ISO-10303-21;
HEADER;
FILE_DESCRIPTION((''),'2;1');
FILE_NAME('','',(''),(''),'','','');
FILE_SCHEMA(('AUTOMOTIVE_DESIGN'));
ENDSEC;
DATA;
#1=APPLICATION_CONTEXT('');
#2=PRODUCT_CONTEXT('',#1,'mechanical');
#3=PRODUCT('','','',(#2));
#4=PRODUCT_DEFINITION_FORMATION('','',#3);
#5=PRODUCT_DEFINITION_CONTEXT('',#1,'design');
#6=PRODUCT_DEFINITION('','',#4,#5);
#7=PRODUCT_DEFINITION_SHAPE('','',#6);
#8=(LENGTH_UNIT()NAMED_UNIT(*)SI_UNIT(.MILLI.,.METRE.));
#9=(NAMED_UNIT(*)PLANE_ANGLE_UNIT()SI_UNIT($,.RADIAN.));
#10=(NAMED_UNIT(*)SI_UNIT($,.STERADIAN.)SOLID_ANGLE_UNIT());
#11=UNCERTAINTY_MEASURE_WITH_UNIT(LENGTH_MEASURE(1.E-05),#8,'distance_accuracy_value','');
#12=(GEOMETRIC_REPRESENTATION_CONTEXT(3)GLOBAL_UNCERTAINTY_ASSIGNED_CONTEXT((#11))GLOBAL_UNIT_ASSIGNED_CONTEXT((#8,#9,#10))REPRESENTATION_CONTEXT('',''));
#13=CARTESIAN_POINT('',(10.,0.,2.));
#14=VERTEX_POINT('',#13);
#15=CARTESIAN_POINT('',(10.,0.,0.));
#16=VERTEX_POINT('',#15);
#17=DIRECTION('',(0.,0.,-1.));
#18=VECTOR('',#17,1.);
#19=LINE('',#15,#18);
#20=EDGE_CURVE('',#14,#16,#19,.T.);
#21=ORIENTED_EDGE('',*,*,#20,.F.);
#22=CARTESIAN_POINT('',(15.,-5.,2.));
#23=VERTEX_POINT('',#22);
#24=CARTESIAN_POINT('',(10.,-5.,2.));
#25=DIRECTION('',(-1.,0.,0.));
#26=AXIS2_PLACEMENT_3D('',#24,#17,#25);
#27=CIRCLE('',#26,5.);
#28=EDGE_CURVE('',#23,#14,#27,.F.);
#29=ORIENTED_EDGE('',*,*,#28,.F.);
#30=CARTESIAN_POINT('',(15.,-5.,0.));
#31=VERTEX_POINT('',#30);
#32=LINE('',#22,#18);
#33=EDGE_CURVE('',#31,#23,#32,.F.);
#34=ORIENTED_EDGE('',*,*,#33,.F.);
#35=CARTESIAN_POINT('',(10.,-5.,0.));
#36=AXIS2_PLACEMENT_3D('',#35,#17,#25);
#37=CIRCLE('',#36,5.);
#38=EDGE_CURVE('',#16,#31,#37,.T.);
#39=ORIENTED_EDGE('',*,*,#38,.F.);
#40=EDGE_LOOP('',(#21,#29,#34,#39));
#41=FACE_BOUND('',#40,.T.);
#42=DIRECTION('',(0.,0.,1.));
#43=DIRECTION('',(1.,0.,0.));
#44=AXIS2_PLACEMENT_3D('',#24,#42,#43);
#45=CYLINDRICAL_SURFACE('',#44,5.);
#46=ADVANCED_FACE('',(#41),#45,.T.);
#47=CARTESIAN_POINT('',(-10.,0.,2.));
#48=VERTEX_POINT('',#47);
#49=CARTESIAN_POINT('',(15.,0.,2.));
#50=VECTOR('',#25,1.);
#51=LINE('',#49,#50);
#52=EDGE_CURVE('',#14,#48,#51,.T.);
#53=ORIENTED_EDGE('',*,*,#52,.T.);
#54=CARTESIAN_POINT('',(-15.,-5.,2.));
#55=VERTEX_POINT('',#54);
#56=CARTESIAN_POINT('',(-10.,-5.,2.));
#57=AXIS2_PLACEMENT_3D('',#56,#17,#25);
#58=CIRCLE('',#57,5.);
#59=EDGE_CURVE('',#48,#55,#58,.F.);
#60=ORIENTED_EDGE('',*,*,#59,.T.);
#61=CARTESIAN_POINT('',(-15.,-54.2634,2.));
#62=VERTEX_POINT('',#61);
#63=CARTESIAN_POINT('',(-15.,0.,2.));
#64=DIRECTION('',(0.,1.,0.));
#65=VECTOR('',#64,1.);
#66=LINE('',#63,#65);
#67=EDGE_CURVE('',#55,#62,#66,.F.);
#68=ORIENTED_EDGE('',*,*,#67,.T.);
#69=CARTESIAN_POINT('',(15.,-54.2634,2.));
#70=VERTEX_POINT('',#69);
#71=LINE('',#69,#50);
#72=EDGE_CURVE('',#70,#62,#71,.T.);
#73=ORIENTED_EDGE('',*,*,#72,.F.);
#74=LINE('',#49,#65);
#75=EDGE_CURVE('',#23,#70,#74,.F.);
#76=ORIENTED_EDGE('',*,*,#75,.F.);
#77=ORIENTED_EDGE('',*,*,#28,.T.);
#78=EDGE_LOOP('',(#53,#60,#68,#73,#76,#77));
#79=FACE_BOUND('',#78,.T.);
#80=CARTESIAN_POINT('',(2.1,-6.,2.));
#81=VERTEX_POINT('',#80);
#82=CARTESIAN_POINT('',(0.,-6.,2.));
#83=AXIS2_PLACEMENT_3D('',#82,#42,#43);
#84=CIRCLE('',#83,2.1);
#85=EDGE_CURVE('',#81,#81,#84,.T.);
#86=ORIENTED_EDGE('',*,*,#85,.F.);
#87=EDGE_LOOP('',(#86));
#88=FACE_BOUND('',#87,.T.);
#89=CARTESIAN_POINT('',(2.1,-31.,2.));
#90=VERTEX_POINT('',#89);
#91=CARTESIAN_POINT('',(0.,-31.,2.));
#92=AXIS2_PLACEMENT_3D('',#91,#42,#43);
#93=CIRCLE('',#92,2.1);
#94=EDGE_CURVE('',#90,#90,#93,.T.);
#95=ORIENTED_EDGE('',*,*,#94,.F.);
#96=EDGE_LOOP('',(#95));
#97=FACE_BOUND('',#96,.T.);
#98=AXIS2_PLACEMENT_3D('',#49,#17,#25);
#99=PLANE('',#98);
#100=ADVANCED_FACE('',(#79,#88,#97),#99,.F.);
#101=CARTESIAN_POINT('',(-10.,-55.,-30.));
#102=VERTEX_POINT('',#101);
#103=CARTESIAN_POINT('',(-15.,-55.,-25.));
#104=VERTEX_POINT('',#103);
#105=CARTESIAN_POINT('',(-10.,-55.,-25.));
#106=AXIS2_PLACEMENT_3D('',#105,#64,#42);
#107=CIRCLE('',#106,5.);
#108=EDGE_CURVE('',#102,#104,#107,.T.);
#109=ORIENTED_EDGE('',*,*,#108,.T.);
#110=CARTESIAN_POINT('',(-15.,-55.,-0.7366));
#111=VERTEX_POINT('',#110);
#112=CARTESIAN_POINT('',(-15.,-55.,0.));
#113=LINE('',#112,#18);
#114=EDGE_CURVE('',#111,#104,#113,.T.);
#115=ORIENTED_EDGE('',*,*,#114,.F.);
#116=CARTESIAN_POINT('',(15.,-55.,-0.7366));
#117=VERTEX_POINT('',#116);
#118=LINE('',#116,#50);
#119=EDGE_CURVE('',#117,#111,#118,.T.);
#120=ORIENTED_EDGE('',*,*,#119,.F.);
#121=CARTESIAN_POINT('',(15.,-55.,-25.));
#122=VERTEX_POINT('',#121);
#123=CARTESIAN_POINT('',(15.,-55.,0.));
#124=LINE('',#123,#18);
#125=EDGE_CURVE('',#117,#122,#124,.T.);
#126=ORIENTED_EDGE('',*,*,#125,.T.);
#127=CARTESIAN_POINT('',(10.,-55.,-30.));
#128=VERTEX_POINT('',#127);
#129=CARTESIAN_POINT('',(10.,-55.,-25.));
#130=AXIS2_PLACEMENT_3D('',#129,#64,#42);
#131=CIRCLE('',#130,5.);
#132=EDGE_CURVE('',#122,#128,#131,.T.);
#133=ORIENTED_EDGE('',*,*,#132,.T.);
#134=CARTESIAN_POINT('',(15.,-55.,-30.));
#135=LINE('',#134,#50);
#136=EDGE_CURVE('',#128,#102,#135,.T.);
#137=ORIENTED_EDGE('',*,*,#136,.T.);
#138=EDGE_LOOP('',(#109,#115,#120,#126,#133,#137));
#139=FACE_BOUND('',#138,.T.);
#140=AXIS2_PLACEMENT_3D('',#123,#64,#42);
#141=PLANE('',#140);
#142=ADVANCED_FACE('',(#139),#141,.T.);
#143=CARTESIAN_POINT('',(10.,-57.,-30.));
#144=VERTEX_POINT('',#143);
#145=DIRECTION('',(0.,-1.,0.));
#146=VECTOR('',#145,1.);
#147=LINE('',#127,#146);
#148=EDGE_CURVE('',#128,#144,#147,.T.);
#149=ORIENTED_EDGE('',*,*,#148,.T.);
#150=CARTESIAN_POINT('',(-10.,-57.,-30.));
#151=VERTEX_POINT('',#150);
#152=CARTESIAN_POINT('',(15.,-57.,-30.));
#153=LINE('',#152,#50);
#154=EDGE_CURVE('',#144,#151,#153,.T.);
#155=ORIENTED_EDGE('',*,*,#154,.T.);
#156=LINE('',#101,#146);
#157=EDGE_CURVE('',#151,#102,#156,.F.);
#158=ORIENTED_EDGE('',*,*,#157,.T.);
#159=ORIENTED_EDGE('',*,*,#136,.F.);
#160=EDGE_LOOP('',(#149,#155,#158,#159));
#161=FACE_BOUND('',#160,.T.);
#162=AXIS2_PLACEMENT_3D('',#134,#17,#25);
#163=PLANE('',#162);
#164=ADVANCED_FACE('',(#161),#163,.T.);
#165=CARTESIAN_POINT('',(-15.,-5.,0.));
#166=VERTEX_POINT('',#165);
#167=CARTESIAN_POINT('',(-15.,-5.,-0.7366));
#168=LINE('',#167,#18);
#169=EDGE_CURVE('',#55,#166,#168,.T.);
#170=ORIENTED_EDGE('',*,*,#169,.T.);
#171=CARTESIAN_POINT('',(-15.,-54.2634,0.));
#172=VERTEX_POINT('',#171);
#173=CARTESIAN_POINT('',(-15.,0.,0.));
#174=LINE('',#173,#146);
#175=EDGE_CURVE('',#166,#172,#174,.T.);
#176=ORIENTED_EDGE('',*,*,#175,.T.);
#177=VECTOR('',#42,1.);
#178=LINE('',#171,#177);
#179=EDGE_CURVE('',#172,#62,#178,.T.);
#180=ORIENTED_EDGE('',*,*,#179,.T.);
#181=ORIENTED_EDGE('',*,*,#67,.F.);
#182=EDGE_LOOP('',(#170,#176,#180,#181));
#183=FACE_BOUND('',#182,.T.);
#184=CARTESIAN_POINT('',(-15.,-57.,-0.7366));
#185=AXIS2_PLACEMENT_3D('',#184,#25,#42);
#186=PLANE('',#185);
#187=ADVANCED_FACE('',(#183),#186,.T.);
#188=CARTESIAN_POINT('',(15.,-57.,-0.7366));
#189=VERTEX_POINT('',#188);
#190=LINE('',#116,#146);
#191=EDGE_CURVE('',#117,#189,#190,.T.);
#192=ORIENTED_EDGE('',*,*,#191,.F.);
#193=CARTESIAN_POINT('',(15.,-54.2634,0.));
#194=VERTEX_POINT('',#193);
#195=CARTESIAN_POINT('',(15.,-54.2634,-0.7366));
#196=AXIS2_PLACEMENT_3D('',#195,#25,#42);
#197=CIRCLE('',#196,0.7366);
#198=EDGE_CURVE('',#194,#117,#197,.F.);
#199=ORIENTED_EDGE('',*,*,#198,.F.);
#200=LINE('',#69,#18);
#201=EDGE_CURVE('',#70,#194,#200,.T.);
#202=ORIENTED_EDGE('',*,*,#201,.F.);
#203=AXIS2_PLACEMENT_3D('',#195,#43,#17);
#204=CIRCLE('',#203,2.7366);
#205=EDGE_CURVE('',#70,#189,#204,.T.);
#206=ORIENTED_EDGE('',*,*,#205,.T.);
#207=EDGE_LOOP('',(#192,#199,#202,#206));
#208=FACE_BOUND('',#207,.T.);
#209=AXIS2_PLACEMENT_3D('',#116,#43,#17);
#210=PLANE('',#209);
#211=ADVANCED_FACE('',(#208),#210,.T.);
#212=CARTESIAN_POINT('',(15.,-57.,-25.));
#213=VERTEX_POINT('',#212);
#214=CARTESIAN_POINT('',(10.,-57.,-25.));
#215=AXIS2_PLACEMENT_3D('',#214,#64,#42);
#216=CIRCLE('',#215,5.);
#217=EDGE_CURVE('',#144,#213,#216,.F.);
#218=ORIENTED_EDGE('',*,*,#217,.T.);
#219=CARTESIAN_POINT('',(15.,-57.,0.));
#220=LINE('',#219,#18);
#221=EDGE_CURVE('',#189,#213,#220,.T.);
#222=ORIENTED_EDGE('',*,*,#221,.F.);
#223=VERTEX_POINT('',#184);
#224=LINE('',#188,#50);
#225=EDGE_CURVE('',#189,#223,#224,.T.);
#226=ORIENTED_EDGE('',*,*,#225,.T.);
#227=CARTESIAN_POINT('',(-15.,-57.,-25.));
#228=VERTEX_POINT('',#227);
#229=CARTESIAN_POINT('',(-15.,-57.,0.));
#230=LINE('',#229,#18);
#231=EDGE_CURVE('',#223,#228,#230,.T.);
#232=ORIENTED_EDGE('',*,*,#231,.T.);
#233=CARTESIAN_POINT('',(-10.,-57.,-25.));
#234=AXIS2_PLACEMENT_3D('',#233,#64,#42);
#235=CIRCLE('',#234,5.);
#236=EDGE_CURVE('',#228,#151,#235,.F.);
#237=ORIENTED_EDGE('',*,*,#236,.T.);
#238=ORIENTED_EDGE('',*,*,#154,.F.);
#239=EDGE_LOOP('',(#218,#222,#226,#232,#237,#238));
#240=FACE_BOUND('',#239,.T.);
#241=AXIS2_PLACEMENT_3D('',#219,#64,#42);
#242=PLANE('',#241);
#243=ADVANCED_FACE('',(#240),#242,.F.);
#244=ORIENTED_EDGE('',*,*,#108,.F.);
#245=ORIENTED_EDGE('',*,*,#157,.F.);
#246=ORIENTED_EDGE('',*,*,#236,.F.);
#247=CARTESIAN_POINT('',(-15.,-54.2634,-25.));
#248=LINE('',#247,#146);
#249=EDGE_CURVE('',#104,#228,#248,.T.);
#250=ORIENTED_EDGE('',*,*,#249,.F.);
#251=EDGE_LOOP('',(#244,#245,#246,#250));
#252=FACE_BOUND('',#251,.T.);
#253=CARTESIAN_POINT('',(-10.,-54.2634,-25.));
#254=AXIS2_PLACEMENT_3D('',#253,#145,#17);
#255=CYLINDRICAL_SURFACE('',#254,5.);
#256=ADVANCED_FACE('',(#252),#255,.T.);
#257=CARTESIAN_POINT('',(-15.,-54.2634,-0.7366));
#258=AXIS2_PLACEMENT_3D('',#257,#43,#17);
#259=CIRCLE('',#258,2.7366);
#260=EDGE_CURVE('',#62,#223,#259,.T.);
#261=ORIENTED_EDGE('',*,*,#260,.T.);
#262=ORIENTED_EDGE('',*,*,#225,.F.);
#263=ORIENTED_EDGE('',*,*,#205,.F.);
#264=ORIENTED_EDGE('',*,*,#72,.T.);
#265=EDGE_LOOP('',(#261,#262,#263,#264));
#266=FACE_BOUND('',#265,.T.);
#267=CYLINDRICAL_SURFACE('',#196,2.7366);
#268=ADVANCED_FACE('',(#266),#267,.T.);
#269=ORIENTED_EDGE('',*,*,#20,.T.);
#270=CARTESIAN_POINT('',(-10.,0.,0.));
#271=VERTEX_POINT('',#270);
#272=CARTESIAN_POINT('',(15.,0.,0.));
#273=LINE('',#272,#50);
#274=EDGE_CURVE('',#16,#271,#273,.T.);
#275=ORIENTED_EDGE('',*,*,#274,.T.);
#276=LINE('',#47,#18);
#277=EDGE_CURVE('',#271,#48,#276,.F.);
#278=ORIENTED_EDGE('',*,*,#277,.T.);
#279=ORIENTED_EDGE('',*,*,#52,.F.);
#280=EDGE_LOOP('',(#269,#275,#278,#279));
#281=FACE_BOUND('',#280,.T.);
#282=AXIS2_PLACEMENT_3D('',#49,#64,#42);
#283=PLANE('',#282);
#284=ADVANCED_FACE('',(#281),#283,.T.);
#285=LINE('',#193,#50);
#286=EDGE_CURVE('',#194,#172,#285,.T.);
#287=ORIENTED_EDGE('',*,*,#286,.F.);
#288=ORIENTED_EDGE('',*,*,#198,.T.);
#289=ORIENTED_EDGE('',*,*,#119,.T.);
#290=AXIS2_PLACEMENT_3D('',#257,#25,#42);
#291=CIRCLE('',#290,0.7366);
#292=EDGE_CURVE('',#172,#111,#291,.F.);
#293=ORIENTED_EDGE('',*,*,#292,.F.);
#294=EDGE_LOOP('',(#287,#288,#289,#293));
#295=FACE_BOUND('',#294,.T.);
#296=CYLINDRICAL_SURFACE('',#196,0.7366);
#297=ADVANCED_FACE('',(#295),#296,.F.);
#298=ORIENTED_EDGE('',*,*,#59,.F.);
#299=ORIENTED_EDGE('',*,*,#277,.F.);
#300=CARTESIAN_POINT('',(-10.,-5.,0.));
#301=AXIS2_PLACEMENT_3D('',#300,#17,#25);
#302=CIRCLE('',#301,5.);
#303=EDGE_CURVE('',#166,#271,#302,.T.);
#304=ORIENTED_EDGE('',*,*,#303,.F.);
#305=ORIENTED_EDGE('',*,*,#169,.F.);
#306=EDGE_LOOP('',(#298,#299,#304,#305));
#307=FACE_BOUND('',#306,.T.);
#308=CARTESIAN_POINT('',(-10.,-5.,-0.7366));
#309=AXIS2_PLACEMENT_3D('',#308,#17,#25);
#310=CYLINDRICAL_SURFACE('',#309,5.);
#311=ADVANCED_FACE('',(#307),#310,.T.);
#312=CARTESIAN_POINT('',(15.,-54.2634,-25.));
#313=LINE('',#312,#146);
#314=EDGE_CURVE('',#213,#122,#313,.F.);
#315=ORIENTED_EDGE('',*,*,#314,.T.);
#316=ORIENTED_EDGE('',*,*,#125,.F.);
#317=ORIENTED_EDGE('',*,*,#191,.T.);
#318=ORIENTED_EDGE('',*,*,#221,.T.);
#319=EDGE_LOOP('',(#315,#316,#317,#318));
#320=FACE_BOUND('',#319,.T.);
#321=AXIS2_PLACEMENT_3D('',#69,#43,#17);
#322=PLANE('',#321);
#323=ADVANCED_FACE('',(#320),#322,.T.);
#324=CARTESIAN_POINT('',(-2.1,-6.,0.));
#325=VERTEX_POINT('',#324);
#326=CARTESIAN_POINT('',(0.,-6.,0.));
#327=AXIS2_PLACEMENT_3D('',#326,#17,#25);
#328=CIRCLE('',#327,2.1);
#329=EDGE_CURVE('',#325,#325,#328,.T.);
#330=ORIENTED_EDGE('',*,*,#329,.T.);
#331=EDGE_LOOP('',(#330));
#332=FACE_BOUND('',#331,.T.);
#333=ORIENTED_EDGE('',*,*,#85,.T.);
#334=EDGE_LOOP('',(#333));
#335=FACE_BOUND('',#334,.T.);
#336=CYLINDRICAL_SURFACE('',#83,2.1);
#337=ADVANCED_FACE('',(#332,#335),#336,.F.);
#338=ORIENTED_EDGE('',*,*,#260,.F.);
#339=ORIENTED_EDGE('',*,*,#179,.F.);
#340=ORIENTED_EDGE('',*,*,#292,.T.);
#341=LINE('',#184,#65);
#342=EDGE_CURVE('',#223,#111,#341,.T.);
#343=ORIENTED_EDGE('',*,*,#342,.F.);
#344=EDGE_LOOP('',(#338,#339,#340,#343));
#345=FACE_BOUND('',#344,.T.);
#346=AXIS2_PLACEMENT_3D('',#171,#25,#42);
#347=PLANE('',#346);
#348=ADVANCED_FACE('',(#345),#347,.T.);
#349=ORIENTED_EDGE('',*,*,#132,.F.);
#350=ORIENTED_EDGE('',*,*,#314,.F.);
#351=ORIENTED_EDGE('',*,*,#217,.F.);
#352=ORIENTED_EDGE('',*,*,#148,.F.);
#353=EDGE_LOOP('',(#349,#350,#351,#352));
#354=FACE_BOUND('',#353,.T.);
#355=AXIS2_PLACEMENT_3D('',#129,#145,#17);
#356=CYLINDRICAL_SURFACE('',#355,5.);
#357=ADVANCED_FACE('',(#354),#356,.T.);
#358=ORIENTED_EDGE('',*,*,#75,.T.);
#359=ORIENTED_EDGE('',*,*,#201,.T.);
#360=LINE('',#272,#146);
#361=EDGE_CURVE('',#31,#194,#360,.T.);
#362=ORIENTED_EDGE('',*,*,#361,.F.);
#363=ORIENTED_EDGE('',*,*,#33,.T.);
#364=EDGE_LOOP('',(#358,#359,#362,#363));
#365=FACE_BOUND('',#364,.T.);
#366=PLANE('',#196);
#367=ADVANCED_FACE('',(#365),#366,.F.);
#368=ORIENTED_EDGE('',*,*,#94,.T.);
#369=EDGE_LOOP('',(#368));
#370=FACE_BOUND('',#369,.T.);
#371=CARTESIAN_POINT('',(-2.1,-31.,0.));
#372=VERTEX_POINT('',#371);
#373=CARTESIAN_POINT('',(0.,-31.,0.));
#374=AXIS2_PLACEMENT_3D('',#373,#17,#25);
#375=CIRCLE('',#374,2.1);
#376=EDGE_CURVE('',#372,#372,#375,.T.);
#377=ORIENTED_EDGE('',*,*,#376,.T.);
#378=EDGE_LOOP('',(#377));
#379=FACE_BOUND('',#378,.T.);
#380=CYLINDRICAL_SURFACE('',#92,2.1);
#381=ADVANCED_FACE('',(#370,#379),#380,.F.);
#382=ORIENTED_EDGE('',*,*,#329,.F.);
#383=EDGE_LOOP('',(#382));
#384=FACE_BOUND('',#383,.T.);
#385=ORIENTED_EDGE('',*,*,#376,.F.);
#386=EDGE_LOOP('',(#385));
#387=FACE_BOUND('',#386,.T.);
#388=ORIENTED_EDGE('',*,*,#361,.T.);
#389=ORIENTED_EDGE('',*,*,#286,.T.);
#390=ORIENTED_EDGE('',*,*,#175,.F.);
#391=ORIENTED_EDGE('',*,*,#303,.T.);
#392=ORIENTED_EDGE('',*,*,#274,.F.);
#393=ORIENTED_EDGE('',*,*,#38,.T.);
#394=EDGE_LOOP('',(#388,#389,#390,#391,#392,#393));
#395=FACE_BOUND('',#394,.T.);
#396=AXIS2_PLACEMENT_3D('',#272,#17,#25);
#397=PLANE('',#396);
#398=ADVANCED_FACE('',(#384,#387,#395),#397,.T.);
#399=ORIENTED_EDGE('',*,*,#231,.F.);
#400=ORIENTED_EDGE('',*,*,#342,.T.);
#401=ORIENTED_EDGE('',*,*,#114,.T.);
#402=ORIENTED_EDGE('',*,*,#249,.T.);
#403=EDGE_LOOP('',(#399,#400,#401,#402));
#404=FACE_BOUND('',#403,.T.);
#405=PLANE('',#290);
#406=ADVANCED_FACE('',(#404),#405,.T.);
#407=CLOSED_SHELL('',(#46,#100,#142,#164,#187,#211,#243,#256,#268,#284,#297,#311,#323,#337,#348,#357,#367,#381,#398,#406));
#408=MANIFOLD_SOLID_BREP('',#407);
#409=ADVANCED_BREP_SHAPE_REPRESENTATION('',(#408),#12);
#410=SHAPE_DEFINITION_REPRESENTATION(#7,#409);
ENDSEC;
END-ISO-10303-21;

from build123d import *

# Parameters (mm, degrees)
TABAN_FLAN_1_DEPTH   = 15
M5_DI_LI_DELIK1_D    = 4.2
K_ELERI_START        = -57
K_ELERI_K_R1_DEPTH   = 2
K_ELERI_K_R1_2_DEPTH = 2


# Read off the part's stored shape, not the designer's step: Köşeleri kır1
# Sheet-metal steps are written as plain solids
with BuildPart() as part:
    # Çizim1 → Taban-Flanş1 (new, symmetric)
    with BuildSketch(Plane(origin=(0, 0, 0), x_dir=(0, 0, -1), z_dir=(1, 0, 0))):
        with BuildLine():
            Line((0, 0), (0, -54.2634))
            ThreePointArc((0, -54.2634), (0.215745145, -54.784254855), (0.7366, -55))
            Line((0.7366, -55), (30, -55))
            Line((30, -55), (30, -57))
            Line((30, -57), (0.7366, -57))
            ThreePointArc((0.7366, -57), (-1.198468417, -56.198468417), (-2, -54.2634))
            Line((-2, -54.2634), (-2, 0))
            Line((-2, 0), (0, 0))
        make_face()
    extrude(amount=TABAN_FLAN_1_DEPTH, both=True)

    # M5 Dişli Delik1 (through all)
    with Locations(Plane(origin=(0, -31, 2), x_dir=(1, 0, 0), z_dir=(0, 0, 1))):
        with Locations((0, 0), (0, 25)):
            Hole(M5_DI_LI_DELIK1_D / 2)

    # Köşeleri kır1 outline → Köşeleri kır1 (cut)
    with BuildSketch(Plane(origin=(0, 0, 0), x_dir=(1, 0, 0), z_dir=(0, 1, 0)).offset(K_ELERI_START)):
        with BuildLine():
            Line((15, 30), (10, 30))
            ThreePointArc((10, 30), (13.535533906, 28.535533906), (15, 25))
            Line((15, 25), (15, 30))
        make_face()
        with BuildLine():
            ThreePointArc((-15, 25), (-13.535533906, 28.535533906), (-10, 30))
            Line((-10, 30), (-15, 30))
            Line((-15, 30), (-15, 25))
        make_face()
    extrude(amount=K_ELERI_K_R1_DEPTH, mode=Mode.SUBTRACT)

    # K_eleri k_r1 2 outline → K_eleri k_r1 2 (cut)
    with BuildSketch(Plane.XY):
        with BuildLine():
            Line((-15, 0), (-15, -5))
            ThreePointArc((-15, -5), (-13.535533906, -1.464466094), (-10, 0))
            Line((-10, 0), (-15, 0))
        make_face()
        with BuildLine():
            Line((15, 0), (10, 0))
            ThreePointArc((10, 0), (13.535533906, -1.464466094), (15, -5))
            Line((15, -5), (15, 0))
        make_face()
    extrude(amount=K_ELERI_K_R1_2_DEPTH, mode=Mode.SUBTRACT)


solid = part.part
